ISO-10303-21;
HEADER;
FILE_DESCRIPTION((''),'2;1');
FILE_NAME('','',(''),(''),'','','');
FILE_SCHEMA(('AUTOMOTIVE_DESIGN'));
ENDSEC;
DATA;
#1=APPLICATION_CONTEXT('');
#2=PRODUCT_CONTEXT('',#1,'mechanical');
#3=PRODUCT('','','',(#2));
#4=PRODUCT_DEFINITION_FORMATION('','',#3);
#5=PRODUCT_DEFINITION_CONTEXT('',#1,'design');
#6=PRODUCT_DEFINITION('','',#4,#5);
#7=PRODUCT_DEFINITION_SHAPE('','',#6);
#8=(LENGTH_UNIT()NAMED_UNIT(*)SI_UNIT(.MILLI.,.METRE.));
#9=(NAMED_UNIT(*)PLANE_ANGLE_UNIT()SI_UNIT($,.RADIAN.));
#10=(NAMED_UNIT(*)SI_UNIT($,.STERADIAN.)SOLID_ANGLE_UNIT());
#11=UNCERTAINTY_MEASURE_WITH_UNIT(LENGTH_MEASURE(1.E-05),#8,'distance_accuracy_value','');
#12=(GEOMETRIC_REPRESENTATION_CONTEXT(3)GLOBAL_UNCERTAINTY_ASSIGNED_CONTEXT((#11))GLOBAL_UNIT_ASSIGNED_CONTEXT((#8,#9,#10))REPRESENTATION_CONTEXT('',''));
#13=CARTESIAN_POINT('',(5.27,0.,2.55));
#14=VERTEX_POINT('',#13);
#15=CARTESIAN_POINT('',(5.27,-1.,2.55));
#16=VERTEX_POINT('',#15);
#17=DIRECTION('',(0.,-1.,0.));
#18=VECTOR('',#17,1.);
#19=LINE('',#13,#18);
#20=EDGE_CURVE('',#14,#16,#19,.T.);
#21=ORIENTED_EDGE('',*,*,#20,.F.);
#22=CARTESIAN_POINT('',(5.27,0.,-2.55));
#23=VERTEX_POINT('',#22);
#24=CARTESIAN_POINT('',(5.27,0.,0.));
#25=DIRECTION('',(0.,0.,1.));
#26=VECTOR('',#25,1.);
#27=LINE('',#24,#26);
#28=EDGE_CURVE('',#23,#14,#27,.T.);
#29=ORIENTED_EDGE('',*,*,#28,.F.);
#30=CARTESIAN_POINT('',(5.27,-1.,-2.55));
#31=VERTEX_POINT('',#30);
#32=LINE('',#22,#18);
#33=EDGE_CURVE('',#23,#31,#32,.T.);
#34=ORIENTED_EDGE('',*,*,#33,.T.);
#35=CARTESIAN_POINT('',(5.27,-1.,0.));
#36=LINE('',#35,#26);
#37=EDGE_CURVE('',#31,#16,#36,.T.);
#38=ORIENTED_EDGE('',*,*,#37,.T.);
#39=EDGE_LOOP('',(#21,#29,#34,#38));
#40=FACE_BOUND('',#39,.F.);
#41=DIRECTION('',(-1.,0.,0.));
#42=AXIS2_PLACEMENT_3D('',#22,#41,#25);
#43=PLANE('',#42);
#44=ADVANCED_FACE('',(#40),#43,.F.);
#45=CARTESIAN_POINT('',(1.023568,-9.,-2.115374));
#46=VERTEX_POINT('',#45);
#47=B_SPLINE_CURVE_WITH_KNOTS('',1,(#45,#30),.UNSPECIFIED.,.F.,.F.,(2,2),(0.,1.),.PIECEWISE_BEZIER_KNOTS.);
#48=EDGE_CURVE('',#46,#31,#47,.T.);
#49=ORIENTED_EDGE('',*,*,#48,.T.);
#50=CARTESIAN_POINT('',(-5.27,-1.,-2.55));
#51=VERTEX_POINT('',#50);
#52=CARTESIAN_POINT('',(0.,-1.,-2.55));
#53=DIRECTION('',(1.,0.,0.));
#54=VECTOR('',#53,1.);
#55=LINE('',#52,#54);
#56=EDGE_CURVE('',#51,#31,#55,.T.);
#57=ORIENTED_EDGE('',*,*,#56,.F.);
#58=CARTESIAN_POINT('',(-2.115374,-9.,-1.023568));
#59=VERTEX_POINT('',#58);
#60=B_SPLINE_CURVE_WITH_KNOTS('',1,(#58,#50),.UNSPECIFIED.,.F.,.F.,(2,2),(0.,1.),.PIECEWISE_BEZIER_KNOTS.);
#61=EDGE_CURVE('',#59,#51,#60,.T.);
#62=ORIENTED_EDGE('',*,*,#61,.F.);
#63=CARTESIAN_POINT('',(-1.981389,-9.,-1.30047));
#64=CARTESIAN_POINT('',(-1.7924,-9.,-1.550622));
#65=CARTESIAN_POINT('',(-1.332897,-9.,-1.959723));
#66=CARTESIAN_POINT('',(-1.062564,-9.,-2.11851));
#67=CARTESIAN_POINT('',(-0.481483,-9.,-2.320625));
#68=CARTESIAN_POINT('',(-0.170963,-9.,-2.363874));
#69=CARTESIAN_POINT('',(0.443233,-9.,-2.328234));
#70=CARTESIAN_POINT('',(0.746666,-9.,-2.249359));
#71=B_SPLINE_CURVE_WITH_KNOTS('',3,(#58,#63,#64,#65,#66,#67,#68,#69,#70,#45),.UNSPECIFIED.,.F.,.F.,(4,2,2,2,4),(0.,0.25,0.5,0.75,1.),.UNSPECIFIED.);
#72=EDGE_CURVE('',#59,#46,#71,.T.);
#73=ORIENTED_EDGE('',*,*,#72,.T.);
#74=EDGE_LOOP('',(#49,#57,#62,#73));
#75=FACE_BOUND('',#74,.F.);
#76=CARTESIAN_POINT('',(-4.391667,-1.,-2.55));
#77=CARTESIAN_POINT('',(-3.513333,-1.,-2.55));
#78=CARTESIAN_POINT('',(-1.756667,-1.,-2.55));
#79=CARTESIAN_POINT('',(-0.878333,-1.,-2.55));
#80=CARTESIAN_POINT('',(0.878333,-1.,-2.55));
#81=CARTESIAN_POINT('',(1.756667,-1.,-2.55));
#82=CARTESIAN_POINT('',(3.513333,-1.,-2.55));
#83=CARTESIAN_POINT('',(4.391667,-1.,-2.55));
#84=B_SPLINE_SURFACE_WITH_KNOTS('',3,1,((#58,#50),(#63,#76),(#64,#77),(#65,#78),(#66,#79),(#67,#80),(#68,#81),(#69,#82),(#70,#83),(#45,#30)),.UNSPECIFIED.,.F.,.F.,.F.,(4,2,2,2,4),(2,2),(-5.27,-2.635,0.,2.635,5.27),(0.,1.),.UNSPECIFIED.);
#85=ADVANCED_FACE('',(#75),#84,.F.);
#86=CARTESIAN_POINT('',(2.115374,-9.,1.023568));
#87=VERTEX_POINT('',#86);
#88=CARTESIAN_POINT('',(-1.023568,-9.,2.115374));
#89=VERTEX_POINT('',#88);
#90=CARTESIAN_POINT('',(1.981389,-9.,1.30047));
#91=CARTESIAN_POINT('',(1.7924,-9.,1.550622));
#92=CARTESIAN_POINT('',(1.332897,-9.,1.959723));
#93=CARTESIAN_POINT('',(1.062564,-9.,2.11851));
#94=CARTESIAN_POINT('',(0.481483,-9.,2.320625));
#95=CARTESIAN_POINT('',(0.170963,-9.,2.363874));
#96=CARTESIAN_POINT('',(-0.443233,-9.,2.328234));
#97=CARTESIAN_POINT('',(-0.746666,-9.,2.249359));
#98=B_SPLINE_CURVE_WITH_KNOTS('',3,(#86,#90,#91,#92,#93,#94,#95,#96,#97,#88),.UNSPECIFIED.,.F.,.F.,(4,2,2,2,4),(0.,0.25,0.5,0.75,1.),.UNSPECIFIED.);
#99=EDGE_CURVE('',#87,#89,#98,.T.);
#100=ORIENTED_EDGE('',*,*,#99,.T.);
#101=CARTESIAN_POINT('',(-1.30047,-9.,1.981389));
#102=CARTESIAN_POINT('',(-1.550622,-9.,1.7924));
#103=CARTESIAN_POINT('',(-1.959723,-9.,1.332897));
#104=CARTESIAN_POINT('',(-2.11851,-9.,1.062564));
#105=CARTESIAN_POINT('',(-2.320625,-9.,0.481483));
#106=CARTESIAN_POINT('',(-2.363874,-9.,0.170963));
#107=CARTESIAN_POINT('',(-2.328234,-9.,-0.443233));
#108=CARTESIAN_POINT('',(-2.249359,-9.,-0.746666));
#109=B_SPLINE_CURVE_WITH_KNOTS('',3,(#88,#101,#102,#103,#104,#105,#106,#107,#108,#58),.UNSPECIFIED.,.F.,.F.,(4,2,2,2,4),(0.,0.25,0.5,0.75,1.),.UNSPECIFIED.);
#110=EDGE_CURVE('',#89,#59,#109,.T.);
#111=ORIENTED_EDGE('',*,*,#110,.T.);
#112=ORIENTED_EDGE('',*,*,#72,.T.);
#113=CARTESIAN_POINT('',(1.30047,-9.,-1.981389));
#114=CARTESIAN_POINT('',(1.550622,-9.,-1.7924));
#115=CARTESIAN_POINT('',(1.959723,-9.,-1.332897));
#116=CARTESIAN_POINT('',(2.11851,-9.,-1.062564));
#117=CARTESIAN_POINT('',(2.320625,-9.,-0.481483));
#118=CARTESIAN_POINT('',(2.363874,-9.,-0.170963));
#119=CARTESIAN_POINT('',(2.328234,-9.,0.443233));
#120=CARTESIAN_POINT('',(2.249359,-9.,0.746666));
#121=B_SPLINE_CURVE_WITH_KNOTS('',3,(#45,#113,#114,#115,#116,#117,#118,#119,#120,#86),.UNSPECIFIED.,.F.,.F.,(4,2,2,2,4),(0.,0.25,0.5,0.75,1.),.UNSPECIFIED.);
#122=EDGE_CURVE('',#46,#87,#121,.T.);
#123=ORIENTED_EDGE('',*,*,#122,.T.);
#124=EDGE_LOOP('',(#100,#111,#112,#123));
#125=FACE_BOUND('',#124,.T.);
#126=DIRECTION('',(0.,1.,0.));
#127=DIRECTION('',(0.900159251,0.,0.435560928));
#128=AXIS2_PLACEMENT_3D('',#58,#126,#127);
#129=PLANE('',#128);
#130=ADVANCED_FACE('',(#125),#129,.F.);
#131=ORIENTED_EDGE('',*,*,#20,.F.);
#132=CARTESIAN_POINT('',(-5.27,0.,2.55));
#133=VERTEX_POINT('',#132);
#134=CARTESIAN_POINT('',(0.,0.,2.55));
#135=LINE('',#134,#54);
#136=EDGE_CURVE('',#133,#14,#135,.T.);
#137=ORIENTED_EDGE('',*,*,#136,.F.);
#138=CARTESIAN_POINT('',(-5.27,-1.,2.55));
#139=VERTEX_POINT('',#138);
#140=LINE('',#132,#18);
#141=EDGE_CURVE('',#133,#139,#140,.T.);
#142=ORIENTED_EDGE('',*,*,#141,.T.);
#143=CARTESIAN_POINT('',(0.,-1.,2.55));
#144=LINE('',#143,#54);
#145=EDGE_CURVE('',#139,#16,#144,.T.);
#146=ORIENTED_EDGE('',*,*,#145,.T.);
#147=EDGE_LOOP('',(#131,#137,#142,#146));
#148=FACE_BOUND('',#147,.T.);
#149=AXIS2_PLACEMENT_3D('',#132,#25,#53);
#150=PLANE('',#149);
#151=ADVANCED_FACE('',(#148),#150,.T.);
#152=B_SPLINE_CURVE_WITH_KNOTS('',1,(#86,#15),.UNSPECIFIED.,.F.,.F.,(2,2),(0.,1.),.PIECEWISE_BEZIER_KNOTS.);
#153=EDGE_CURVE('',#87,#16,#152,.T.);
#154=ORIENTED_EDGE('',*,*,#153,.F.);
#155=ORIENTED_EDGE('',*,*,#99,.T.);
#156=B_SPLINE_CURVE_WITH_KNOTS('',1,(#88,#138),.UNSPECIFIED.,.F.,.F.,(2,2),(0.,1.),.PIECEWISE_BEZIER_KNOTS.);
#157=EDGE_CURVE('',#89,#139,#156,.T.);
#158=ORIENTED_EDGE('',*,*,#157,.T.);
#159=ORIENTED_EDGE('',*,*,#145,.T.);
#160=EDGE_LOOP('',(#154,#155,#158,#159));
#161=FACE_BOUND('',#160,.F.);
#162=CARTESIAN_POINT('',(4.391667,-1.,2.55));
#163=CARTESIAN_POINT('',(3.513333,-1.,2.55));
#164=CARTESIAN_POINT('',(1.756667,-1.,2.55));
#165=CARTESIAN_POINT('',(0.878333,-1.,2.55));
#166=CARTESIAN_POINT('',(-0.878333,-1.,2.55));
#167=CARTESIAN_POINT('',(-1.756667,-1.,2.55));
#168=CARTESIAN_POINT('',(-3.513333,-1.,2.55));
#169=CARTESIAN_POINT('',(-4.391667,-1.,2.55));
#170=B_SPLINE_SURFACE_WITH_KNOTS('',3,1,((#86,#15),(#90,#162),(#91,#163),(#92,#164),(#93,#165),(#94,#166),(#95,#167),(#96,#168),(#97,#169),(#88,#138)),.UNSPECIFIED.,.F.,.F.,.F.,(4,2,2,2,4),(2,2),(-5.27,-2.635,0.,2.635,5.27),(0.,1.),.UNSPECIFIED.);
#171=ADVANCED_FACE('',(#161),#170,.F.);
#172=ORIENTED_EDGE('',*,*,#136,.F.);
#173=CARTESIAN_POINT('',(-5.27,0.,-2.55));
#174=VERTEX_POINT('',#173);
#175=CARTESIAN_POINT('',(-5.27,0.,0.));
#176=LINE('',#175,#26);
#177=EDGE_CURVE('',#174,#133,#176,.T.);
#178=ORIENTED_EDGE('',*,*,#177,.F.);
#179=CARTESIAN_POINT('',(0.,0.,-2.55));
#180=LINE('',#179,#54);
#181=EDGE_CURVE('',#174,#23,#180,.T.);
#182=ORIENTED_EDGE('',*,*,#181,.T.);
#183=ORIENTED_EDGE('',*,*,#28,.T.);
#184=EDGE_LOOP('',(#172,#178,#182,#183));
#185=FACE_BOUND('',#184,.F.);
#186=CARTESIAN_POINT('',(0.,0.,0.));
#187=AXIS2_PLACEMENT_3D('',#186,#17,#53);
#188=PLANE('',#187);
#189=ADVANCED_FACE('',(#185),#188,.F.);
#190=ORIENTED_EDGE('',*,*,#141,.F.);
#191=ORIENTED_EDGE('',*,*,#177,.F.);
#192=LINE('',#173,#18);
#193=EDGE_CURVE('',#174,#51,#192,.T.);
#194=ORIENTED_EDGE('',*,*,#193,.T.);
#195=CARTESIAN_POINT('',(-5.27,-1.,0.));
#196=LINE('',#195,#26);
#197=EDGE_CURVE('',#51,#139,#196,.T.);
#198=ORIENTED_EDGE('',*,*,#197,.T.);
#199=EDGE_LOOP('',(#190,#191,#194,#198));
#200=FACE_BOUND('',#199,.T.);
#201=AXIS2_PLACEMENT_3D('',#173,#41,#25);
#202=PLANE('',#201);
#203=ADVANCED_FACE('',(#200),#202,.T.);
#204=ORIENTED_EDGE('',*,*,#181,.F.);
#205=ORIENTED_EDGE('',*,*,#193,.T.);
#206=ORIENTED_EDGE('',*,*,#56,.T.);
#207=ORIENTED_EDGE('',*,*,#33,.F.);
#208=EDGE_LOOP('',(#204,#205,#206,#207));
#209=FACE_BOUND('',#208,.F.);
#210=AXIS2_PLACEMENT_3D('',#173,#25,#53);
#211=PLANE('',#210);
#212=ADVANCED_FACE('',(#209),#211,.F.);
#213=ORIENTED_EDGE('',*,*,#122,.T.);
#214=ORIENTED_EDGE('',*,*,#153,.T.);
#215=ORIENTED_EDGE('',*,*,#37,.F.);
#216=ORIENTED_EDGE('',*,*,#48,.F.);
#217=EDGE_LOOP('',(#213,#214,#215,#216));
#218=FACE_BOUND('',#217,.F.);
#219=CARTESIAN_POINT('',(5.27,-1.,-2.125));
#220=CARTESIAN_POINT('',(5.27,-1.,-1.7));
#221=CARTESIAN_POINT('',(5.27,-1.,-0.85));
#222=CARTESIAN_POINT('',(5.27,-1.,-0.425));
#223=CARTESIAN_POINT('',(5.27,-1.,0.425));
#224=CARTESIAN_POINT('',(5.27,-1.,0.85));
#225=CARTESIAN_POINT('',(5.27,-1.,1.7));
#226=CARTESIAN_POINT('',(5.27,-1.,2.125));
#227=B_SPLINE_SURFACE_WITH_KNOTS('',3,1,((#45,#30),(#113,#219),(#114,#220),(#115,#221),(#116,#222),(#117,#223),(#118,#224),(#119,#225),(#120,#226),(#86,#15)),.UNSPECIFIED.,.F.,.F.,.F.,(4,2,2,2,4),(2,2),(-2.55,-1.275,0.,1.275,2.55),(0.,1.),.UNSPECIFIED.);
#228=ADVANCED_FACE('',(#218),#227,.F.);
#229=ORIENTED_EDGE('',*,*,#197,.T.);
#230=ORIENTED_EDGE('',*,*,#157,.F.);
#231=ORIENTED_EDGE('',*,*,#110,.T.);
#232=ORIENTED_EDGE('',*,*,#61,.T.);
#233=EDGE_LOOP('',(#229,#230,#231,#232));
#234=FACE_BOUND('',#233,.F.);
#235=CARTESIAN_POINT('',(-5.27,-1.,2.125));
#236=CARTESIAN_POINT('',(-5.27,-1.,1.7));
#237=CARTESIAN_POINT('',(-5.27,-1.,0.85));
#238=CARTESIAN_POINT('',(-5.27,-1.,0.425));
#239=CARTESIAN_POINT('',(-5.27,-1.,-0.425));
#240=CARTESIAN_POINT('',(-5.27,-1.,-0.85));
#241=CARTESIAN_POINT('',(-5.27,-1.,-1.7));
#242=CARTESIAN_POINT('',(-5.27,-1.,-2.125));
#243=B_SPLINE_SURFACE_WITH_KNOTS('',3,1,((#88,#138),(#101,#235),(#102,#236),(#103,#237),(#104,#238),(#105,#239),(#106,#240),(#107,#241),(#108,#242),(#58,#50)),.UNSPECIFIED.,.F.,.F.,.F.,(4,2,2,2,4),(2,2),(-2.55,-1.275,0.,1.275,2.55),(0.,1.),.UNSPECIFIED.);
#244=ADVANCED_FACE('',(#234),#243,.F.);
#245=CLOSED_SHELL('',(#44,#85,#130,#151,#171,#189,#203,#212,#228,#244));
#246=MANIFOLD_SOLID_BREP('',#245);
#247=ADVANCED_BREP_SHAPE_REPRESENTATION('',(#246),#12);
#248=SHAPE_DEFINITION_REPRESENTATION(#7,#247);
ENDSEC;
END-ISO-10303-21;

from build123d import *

# Parameters (mm, degrees)
F0_W     = 10.54
F0_H     = 5.1
F1_DEPTH = 1
F4_W     = 10.54
F4_H     = 5.1


# Not quite as in the source:
# - the arcs of a loft's sections are written as splines that run evenly, so that the points pair up as in the source's solid


with BuildPart() as f1:
    # F0 (on Front) → F1 (new body)
    with BuildSketch(Plane.XZ):
        Rectangle(F0_W, F0_H)
    extrude(amount=F1_DEPTH)

    # F3 (on offset) → F5 section 0
    with BuildSketch(Plane.XZ.offset(9)):
        with BuildLine():
            add(Edge.make_bspline(
                [(-2.1153742408, -1.023568181), (-1.9813894792, -1.3004700217), (-1.7923999056, -1.5506221732), (-1.3328968542, -1.9597225624), (-1.0625641713, -2.1185098365), (-0.4814827659, -2.320625108), (-0.1709626741, -2.3638735816), (0.4432327089, -2.3282335174), (0.7466663404, -2.2493590024), (1.023568181, -2.1153742408)],
                knots=[0, 0, 0, 0, 0.25, 0.25, 0.5, 0.5, 0.75, 0.75, 1, 1, 1, 1], degree=3))
            add(Edge.make_bspline(
                [(1.023568181, -2.1153742408), (1.3004700217, -1.9813894792), (1.5506221732, -1.7923999056), (1.9597225624, -1.3328968542), (2.1185098365, -1.0625641713), (2.320625108, -0.4814827659), (2.3638735816, -0.1709626741), (2.3282335174, 0.4432327089), (2.2493590024, 0.7466663404), (2.1153742408, 1.023568181)],
                knots=[0, 0, 0, 0, 0.25, 0.25, 0.5, 0.5, 0.75, 0.75, 1, 1, 1, 1], degree=3))
            add(Edge.make_bspline(
                [(2.1153742408, 1.023568181), (1.9813894792, 1.3004700217), (1.7923999056, 1.5506221732), (1.3328968542, 1.9597225624), (1.0625641713, 2.1185098365), (0.4814827659, 2.320625108), (0.1709626741, 2.3638735816), (-0.4432327089, 2.3282335174), (-0.7466663404, 2.2493590024), (-1.023568181, 2.1153742408)],
                knots=[0, 0, 0, 0, 0.25, 0.25, 0.5, 0.5, 0.75, 0.75, 1, 1, 1, 1], degree=3))
            add(Edge.make_bspline(
                [(-1.023568181, 2.1153742408), (-1.3004700217, 1.9813894792), (-1.5506221732, 1.7923999056), (-1.9597225624, 1.3328968542), (-2.1185098365, 1.0625641713), (-2.320625108, 0.4814827659), (-2.3638735816, 0.1709626741), (-2.3282335174, -0.4432327089), (-2.2493590024, -0.7466663404), (-2.1153742408, -1.023568181)],
                knots=[0, 0, 0, 0, 0.25, 0.25, 0.5, 0.5, 0.75, 0.75, 1, 1, 1, 1], degree=3))
        make_face()
    # F4 (on face) → F5 section 1
    with BuildSketch(Plane.XZ.offset(1)):
        Rectangle(F4_W, F4_H)
    loft(ruled=True)


solid = f1.part
